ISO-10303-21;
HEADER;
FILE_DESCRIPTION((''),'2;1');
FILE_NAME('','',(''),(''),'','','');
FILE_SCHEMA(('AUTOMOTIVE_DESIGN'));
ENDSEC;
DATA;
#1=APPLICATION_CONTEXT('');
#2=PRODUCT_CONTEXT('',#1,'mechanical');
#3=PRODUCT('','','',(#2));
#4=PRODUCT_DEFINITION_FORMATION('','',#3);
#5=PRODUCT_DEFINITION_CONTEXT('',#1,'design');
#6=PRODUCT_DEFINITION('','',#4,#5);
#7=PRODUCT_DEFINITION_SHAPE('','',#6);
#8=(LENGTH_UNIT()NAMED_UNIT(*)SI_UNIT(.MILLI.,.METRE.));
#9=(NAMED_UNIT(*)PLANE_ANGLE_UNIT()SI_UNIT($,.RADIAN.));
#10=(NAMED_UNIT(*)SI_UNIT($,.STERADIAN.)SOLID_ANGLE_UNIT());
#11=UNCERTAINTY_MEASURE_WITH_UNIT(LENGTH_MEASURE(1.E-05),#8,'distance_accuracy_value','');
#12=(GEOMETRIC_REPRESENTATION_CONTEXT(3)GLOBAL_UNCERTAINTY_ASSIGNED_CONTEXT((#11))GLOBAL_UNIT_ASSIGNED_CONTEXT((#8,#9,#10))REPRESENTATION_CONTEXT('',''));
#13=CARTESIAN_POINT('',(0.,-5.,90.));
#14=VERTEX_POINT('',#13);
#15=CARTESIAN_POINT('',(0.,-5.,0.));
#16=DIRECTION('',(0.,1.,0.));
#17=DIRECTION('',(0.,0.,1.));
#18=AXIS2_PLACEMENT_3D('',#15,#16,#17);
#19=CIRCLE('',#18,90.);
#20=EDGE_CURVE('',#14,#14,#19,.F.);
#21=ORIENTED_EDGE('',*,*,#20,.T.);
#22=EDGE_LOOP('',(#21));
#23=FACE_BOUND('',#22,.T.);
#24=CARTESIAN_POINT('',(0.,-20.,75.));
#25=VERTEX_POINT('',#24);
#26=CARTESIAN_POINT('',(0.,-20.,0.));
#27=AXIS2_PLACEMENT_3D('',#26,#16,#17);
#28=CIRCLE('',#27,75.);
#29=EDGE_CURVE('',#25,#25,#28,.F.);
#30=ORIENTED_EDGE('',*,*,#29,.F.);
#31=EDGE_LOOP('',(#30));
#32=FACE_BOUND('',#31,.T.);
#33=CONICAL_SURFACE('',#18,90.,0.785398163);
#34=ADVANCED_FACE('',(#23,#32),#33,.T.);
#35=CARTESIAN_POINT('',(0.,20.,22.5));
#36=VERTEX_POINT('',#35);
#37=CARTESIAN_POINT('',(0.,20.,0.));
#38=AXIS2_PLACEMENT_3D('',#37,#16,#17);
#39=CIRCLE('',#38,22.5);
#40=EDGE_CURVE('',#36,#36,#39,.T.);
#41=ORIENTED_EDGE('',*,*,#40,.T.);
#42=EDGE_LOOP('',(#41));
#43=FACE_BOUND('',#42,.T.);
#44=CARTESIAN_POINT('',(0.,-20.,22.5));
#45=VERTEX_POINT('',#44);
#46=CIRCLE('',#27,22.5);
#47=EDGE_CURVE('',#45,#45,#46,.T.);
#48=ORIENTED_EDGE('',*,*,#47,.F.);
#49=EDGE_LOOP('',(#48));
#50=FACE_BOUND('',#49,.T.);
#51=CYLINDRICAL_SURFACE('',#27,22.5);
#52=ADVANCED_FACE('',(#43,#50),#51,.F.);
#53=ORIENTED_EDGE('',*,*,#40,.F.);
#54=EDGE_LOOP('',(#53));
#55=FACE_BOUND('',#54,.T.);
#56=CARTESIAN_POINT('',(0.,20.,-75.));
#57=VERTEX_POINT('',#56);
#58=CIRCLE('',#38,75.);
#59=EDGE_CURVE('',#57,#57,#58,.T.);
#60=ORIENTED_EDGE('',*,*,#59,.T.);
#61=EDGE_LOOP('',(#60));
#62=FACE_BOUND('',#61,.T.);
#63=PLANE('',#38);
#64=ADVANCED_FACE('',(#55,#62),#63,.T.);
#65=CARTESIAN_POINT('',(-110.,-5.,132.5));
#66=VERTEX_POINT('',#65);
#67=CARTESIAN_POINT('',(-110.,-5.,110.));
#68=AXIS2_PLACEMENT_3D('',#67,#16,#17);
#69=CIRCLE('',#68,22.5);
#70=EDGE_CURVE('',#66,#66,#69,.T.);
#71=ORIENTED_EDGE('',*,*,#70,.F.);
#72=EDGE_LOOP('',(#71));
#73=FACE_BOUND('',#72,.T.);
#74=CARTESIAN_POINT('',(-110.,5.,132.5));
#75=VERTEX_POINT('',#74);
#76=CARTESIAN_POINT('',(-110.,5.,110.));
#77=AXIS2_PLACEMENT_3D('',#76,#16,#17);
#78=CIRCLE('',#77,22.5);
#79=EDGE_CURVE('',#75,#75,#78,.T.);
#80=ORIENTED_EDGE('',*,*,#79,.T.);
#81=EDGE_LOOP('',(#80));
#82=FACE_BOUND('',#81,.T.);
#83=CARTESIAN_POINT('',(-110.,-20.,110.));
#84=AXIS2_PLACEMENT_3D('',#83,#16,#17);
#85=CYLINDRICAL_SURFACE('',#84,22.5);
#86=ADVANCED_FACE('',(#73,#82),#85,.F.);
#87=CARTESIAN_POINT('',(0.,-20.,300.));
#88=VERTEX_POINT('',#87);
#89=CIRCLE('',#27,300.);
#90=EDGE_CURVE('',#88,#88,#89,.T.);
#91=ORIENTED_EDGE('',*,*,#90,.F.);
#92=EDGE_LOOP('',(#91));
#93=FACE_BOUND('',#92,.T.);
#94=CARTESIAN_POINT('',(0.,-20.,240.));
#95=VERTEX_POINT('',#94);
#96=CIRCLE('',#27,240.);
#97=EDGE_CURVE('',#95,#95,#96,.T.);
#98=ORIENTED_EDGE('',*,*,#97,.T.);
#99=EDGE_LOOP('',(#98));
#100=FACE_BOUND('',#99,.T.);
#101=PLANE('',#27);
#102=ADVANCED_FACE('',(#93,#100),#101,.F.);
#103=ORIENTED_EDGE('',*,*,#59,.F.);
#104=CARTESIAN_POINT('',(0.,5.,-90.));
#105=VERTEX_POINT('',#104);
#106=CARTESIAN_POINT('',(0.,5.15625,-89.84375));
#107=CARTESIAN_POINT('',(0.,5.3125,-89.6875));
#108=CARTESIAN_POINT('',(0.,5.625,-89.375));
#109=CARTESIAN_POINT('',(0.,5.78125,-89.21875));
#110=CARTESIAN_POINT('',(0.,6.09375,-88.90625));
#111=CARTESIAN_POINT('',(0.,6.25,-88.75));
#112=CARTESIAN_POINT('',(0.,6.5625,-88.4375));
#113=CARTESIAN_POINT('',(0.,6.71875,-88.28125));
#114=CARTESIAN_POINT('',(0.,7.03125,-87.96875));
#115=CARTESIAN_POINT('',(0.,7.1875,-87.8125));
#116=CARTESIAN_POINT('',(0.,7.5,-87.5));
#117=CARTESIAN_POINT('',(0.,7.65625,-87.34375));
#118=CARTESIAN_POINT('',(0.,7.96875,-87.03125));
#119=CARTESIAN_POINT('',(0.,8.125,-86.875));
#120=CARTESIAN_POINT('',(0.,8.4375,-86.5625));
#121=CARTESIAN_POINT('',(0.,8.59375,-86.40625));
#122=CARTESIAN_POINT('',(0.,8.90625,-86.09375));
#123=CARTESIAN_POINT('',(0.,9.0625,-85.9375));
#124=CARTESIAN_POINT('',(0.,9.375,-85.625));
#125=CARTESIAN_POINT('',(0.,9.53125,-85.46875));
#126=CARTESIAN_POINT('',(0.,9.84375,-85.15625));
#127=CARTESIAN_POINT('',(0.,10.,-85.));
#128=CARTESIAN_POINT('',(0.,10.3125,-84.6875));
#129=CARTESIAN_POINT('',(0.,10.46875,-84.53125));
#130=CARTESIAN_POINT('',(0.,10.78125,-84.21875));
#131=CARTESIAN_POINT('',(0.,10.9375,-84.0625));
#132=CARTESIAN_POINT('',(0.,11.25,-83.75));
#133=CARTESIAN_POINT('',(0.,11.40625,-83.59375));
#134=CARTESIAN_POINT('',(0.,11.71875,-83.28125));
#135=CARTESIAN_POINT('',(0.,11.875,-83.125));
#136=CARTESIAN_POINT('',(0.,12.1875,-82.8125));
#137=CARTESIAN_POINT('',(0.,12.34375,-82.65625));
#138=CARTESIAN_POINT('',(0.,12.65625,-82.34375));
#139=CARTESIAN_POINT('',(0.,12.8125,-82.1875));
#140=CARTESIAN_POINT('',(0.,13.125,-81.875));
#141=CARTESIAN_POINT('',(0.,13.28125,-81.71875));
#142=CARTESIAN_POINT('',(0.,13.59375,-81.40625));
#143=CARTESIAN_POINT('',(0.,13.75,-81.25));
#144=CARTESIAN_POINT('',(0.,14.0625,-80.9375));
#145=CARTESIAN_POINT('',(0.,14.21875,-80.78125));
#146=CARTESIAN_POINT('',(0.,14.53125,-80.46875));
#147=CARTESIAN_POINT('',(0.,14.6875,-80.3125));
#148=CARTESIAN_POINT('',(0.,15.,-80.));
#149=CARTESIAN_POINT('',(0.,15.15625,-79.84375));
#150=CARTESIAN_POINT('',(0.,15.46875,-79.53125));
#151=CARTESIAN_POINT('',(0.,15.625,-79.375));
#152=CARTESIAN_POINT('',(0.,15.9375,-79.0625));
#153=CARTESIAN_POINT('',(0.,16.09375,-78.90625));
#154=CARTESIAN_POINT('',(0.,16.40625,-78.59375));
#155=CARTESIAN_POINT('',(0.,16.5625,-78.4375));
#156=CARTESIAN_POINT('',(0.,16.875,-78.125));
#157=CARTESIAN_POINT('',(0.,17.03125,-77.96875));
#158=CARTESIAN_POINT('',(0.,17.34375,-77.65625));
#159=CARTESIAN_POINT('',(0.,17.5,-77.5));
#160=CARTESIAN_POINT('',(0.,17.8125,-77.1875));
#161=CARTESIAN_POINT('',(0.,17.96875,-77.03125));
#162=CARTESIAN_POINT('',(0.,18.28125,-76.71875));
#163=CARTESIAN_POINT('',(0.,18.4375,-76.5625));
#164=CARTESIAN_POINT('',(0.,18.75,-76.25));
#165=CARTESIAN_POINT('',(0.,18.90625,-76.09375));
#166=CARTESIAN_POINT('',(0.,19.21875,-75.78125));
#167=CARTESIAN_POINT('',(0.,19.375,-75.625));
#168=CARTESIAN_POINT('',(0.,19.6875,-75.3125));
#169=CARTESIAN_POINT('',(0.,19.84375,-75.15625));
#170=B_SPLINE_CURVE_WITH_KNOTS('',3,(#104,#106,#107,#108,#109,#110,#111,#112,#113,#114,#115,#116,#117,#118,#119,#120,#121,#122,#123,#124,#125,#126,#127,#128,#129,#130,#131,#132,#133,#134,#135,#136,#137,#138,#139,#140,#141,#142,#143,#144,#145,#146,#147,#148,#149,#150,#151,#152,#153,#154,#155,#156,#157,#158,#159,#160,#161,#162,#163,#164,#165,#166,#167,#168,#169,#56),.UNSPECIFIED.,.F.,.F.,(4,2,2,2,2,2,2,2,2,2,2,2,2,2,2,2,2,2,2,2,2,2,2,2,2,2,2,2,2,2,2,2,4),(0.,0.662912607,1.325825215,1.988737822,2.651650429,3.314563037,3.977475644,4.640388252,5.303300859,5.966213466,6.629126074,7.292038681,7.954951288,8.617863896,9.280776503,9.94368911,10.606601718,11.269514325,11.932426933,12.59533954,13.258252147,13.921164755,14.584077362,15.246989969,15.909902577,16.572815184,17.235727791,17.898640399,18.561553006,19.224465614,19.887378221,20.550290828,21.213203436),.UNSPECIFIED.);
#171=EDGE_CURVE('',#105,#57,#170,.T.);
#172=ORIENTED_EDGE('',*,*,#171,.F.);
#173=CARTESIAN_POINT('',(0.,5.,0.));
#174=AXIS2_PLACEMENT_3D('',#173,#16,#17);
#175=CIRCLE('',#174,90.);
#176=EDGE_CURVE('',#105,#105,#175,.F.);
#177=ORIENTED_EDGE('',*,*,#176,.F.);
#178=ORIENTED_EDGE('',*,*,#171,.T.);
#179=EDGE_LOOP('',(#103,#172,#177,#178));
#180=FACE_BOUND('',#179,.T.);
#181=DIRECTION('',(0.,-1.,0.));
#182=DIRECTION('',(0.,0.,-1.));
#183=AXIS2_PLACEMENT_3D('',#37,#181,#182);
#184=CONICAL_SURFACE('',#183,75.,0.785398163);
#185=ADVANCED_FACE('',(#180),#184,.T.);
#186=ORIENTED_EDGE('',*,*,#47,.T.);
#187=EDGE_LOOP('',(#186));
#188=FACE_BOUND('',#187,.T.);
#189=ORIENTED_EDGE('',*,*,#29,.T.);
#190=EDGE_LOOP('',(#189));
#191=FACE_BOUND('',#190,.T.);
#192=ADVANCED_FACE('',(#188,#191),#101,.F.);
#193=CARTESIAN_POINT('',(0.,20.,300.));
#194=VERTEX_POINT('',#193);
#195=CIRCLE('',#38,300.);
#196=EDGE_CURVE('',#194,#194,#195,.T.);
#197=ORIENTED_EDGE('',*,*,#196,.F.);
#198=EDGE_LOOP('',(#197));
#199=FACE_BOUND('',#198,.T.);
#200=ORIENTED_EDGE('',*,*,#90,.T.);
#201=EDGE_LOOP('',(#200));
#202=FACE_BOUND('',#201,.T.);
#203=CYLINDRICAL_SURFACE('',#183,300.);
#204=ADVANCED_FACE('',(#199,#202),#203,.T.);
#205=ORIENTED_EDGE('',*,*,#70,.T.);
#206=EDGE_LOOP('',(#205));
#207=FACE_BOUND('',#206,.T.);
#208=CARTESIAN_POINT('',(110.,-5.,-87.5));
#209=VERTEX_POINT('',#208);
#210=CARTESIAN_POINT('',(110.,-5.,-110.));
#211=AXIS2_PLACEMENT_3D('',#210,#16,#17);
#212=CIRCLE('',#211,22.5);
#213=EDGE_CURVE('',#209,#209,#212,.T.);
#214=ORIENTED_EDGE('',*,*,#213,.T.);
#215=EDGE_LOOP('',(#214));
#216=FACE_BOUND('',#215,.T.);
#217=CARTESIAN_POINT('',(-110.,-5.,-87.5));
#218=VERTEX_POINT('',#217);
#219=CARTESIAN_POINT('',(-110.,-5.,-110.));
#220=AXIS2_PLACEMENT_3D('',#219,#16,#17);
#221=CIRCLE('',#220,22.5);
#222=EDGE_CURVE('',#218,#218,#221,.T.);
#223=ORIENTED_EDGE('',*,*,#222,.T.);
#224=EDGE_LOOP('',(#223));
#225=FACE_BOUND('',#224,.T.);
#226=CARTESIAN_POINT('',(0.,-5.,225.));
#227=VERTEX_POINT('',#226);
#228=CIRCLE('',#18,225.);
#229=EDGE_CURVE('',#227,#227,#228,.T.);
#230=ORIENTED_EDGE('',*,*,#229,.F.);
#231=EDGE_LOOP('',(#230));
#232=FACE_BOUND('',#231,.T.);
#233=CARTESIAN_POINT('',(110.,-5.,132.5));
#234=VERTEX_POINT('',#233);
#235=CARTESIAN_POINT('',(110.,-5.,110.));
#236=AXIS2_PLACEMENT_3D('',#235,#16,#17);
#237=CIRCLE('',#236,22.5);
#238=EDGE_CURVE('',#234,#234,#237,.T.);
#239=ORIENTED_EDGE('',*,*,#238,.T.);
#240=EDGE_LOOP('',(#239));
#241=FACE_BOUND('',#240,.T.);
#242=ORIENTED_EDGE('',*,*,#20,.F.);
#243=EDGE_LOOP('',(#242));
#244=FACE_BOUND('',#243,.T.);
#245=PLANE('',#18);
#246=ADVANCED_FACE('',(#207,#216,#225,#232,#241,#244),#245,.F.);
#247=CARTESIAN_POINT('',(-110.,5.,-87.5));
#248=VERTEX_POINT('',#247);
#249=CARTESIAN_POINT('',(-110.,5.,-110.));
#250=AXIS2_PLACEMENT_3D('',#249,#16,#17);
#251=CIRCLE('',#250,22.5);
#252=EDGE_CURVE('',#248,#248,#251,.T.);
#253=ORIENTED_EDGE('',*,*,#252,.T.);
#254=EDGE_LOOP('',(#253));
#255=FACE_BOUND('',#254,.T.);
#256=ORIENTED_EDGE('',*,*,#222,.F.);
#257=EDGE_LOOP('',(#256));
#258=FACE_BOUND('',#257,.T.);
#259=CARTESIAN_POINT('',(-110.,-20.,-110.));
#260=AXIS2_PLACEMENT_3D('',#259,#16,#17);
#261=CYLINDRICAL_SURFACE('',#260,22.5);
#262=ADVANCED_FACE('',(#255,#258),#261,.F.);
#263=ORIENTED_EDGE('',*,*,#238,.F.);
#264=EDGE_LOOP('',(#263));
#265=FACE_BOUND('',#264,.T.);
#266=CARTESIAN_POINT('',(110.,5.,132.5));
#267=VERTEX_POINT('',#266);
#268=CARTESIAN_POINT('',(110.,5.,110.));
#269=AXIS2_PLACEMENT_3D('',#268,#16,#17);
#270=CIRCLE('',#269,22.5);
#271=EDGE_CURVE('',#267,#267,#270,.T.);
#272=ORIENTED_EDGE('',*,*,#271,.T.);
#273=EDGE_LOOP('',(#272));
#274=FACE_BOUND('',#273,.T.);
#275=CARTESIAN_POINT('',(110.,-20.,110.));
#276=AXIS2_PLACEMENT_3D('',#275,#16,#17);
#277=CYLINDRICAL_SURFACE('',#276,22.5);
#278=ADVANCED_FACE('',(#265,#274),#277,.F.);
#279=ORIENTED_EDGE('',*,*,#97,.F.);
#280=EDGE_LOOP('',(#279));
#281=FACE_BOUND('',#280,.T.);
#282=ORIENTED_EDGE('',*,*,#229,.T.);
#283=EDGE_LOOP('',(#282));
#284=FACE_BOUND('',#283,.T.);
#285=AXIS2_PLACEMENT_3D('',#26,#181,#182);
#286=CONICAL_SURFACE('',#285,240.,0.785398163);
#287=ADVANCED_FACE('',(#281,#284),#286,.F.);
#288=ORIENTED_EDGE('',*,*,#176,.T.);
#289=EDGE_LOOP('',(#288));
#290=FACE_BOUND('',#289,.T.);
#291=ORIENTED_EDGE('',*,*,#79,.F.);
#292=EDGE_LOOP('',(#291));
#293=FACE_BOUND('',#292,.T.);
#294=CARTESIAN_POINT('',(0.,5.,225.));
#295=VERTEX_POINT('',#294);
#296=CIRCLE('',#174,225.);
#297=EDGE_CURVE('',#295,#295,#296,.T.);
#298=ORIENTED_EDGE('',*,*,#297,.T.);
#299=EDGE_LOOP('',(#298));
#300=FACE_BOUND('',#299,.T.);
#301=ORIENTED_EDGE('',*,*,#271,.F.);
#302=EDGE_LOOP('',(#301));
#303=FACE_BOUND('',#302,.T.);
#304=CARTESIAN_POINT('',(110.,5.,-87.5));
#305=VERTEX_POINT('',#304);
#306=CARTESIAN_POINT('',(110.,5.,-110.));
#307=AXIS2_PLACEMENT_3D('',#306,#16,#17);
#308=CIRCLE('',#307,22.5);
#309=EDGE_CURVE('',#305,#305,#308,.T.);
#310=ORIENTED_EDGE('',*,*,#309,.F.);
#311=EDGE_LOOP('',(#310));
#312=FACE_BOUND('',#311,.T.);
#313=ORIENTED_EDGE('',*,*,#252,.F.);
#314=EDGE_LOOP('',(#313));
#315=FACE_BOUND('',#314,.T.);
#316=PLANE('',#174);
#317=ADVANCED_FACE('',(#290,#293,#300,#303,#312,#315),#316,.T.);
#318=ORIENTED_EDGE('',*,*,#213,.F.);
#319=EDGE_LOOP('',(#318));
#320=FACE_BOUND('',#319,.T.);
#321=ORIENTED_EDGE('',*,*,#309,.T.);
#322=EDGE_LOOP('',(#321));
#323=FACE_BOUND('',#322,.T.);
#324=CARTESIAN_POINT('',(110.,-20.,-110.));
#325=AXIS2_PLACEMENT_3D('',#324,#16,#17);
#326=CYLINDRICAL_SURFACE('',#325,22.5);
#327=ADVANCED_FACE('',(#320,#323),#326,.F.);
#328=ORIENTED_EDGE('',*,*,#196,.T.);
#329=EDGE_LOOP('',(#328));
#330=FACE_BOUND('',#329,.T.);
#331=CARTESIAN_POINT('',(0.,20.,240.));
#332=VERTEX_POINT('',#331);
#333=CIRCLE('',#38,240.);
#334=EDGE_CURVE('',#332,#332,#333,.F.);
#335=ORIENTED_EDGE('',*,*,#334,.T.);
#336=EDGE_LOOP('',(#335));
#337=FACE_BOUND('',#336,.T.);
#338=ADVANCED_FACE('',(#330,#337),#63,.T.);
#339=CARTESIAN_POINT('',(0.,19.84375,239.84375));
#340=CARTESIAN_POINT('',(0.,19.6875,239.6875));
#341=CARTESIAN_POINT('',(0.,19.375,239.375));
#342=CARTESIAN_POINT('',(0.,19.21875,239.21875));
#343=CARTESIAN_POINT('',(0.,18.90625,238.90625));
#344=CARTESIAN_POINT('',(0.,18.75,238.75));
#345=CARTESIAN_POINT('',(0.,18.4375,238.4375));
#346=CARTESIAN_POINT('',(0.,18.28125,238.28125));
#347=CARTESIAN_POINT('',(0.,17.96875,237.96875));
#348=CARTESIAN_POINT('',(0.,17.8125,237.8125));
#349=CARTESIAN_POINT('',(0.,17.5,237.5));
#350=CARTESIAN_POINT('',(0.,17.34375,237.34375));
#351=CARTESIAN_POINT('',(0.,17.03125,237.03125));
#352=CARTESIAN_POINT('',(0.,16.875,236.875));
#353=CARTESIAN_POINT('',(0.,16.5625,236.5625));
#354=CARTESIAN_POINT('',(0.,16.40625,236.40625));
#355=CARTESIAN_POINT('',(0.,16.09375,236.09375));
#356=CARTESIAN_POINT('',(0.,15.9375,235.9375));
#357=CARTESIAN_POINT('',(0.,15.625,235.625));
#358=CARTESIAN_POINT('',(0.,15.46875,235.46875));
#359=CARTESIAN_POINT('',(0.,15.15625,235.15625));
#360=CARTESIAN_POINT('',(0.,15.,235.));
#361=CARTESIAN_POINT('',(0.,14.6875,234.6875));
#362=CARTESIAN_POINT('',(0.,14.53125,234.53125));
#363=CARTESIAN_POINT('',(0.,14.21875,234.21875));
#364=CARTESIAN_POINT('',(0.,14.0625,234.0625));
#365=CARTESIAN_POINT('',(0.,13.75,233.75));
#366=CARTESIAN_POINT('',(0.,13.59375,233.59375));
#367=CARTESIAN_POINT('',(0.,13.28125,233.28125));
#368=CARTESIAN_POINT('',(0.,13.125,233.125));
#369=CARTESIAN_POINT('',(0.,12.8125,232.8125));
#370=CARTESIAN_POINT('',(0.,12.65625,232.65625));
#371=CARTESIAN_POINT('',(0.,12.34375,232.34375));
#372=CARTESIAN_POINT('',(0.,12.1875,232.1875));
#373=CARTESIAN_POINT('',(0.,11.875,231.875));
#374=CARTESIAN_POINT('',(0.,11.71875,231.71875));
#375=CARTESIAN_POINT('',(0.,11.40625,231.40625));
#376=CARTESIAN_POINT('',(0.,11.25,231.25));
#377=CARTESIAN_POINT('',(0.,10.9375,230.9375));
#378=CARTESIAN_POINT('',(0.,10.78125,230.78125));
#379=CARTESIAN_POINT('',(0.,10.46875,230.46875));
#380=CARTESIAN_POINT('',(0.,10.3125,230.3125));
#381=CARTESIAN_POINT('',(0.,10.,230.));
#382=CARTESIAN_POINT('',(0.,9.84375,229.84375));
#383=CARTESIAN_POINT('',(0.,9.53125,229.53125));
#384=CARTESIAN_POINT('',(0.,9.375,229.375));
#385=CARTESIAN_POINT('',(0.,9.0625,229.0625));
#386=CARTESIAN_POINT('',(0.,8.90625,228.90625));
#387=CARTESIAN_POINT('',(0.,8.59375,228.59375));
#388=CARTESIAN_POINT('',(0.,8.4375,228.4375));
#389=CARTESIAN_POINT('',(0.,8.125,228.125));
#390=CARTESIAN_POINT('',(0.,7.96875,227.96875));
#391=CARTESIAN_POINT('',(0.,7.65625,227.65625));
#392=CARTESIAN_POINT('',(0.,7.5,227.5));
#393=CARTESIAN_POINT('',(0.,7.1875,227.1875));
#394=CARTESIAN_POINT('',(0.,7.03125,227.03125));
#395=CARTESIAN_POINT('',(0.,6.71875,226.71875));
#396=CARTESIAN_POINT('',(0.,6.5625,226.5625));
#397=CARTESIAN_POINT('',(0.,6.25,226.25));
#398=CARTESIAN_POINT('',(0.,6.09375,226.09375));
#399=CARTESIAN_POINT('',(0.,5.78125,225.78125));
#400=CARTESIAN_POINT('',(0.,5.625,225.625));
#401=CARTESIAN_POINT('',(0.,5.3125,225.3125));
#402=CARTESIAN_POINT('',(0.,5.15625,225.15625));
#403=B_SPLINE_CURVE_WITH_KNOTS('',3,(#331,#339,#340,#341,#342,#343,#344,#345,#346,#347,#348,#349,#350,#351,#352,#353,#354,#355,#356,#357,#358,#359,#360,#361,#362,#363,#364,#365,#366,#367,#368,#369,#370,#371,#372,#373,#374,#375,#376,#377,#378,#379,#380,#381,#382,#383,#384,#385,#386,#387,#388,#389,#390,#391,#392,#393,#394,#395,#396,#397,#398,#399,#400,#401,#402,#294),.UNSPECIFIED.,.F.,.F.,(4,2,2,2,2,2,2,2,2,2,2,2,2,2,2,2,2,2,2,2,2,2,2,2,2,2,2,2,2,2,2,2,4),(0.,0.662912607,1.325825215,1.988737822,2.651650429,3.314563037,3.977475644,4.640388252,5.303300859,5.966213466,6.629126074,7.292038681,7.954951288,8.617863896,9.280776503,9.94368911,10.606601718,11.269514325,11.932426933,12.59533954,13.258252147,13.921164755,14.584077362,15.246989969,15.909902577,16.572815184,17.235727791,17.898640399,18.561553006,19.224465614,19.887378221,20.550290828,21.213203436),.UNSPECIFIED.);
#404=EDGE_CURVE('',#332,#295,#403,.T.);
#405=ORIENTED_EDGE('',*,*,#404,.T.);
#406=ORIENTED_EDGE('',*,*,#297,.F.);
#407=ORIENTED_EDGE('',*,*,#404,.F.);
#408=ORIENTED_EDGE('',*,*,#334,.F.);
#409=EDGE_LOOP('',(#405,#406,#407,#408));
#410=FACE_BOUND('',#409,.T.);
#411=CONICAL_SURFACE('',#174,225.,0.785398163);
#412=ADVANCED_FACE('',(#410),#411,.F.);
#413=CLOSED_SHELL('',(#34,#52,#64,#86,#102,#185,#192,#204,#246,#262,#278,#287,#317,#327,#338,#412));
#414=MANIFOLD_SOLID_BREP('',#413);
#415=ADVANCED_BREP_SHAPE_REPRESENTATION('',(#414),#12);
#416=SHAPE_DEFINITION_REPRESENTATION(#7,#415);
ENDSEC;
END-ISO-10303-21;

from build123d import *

# Parameters (mm, degrees)
SKETCH1_R               = 300
SKETCH1_R_2             = 225
BOSS_EXTRUDE1_DEPTH     = 20
SKETCH1_R_3             = 90
BOSS_EXTRUDE1_2_DEPTH   = 20
SKETCH3_R               = 225
BOSS_EXTRUDE3_DEPTH     = 5
CHAMFER2_SIZE           = 15
CUT_EXTRUDE1_DEPTH      = 425.735211632
CUT_EXTRUDE1_DEPTH_BACK = 425.735211632
SKETCH4_R               = 22.5


with BuildPart() as part:
    # Sketch1 → Boss-Extrude1 (new, symmetric)
    with BuildSketch(Plane(origin=(0, 0, 0), x_dir=(1, 0, 0), z_dir=(0, 1, 0))):
        with Locations(Location((0, 0, 0), (0, 0, 270))):
            Circle(SKETCH1_R)
        with Locations(Location((0, 0, 0), (0, 0, 270))):
            Circle(SKETCH1_R_2, mode=Mode.SUBTRACT)
    extrude(amount=BOSS_EXTRUDE1_DEPTH, both=True)



with BuildPart() as body_2:
    # Sketch1 → Boss-Extrude1 2 (new, symmetric)
    with BuildSketch(Plane(origin=(0, 0, 0), x_dir=(1, 0, 0), z_dir=(0, 1, 0))):
        with Locations(Location((0, 0, 0), (0, 0, 270))):
            Circle(SKETCH1_R_3)
    extrude(amount=BOSS_EXTRUDE1_2_DEPTH, both=True)


with BuildPart() as part_1:
    add(part.part)

    add(body_2.part)  # Boss-Extrude3 merges body 2
    # Sketch3 → Boss-Extrude3 (add, symmetric)
    with BuildSketch(Plane(origin=(0, 0, 0), x_dir=(1, 0, 0), z_dir=(0, 1, 0))):
        with Locations(Location((0, 0, 0), (0, 0, 270))):
            Circle(SKETCH3_R)
    extrude(amount=BOSS_EXTRUDE3_DEPTH, both=True)

    # Chamfer2
    chamfer2_edges = [part_1.edges().sort_by_distance(p)[0] for p in [
        (0, -20, -90),
        (0, 20, -90),
        (0, -20, -225),
        (0, 20, -225),
    ]]
    chamfer(chamfer2_edges, length=CHAMFER2_SIZE - 0.0001)  # a hair under: the kernel refuses the full size

    # Sketch4 → Cut-Extrude1 (cut, two sides: drawn at the far end of the back side and taken through both)
    with BuildSketch(Plane(origin=(0, 0, 0), x_dir=(1, 0, 0), z_dir=(0, 1, 0)).offset(-CUT_EXTRUDE1_DEPTH_BACK)):
        with Locations(Location((0, 0, 0), (0, 0, 270))):
            Circle(SKETCH4_R)
        with Locations(Location((-110, 110, 0), (0, 0, 270))):
            Circle(SKETCH4_R)
        with Locations(Location((110, 110, 0), (0, 0, 270))):
            Circle(SKETCH4_R)
        with Locations(Location((110, -110, 0), (0, 0, 270))):
            Circle(SKETCH4_R)
        with Locations(Location((-110, -110, 0), (0, 0, 270))):
            Circle(SKETCH4_R)
    extrude(amount=CUT_EXTRUDE1_DEPTH + CUT_EXTRUDE1_DEPTH_BACK, mode=Mode.SUBTRACT)


solid = part_1.part
